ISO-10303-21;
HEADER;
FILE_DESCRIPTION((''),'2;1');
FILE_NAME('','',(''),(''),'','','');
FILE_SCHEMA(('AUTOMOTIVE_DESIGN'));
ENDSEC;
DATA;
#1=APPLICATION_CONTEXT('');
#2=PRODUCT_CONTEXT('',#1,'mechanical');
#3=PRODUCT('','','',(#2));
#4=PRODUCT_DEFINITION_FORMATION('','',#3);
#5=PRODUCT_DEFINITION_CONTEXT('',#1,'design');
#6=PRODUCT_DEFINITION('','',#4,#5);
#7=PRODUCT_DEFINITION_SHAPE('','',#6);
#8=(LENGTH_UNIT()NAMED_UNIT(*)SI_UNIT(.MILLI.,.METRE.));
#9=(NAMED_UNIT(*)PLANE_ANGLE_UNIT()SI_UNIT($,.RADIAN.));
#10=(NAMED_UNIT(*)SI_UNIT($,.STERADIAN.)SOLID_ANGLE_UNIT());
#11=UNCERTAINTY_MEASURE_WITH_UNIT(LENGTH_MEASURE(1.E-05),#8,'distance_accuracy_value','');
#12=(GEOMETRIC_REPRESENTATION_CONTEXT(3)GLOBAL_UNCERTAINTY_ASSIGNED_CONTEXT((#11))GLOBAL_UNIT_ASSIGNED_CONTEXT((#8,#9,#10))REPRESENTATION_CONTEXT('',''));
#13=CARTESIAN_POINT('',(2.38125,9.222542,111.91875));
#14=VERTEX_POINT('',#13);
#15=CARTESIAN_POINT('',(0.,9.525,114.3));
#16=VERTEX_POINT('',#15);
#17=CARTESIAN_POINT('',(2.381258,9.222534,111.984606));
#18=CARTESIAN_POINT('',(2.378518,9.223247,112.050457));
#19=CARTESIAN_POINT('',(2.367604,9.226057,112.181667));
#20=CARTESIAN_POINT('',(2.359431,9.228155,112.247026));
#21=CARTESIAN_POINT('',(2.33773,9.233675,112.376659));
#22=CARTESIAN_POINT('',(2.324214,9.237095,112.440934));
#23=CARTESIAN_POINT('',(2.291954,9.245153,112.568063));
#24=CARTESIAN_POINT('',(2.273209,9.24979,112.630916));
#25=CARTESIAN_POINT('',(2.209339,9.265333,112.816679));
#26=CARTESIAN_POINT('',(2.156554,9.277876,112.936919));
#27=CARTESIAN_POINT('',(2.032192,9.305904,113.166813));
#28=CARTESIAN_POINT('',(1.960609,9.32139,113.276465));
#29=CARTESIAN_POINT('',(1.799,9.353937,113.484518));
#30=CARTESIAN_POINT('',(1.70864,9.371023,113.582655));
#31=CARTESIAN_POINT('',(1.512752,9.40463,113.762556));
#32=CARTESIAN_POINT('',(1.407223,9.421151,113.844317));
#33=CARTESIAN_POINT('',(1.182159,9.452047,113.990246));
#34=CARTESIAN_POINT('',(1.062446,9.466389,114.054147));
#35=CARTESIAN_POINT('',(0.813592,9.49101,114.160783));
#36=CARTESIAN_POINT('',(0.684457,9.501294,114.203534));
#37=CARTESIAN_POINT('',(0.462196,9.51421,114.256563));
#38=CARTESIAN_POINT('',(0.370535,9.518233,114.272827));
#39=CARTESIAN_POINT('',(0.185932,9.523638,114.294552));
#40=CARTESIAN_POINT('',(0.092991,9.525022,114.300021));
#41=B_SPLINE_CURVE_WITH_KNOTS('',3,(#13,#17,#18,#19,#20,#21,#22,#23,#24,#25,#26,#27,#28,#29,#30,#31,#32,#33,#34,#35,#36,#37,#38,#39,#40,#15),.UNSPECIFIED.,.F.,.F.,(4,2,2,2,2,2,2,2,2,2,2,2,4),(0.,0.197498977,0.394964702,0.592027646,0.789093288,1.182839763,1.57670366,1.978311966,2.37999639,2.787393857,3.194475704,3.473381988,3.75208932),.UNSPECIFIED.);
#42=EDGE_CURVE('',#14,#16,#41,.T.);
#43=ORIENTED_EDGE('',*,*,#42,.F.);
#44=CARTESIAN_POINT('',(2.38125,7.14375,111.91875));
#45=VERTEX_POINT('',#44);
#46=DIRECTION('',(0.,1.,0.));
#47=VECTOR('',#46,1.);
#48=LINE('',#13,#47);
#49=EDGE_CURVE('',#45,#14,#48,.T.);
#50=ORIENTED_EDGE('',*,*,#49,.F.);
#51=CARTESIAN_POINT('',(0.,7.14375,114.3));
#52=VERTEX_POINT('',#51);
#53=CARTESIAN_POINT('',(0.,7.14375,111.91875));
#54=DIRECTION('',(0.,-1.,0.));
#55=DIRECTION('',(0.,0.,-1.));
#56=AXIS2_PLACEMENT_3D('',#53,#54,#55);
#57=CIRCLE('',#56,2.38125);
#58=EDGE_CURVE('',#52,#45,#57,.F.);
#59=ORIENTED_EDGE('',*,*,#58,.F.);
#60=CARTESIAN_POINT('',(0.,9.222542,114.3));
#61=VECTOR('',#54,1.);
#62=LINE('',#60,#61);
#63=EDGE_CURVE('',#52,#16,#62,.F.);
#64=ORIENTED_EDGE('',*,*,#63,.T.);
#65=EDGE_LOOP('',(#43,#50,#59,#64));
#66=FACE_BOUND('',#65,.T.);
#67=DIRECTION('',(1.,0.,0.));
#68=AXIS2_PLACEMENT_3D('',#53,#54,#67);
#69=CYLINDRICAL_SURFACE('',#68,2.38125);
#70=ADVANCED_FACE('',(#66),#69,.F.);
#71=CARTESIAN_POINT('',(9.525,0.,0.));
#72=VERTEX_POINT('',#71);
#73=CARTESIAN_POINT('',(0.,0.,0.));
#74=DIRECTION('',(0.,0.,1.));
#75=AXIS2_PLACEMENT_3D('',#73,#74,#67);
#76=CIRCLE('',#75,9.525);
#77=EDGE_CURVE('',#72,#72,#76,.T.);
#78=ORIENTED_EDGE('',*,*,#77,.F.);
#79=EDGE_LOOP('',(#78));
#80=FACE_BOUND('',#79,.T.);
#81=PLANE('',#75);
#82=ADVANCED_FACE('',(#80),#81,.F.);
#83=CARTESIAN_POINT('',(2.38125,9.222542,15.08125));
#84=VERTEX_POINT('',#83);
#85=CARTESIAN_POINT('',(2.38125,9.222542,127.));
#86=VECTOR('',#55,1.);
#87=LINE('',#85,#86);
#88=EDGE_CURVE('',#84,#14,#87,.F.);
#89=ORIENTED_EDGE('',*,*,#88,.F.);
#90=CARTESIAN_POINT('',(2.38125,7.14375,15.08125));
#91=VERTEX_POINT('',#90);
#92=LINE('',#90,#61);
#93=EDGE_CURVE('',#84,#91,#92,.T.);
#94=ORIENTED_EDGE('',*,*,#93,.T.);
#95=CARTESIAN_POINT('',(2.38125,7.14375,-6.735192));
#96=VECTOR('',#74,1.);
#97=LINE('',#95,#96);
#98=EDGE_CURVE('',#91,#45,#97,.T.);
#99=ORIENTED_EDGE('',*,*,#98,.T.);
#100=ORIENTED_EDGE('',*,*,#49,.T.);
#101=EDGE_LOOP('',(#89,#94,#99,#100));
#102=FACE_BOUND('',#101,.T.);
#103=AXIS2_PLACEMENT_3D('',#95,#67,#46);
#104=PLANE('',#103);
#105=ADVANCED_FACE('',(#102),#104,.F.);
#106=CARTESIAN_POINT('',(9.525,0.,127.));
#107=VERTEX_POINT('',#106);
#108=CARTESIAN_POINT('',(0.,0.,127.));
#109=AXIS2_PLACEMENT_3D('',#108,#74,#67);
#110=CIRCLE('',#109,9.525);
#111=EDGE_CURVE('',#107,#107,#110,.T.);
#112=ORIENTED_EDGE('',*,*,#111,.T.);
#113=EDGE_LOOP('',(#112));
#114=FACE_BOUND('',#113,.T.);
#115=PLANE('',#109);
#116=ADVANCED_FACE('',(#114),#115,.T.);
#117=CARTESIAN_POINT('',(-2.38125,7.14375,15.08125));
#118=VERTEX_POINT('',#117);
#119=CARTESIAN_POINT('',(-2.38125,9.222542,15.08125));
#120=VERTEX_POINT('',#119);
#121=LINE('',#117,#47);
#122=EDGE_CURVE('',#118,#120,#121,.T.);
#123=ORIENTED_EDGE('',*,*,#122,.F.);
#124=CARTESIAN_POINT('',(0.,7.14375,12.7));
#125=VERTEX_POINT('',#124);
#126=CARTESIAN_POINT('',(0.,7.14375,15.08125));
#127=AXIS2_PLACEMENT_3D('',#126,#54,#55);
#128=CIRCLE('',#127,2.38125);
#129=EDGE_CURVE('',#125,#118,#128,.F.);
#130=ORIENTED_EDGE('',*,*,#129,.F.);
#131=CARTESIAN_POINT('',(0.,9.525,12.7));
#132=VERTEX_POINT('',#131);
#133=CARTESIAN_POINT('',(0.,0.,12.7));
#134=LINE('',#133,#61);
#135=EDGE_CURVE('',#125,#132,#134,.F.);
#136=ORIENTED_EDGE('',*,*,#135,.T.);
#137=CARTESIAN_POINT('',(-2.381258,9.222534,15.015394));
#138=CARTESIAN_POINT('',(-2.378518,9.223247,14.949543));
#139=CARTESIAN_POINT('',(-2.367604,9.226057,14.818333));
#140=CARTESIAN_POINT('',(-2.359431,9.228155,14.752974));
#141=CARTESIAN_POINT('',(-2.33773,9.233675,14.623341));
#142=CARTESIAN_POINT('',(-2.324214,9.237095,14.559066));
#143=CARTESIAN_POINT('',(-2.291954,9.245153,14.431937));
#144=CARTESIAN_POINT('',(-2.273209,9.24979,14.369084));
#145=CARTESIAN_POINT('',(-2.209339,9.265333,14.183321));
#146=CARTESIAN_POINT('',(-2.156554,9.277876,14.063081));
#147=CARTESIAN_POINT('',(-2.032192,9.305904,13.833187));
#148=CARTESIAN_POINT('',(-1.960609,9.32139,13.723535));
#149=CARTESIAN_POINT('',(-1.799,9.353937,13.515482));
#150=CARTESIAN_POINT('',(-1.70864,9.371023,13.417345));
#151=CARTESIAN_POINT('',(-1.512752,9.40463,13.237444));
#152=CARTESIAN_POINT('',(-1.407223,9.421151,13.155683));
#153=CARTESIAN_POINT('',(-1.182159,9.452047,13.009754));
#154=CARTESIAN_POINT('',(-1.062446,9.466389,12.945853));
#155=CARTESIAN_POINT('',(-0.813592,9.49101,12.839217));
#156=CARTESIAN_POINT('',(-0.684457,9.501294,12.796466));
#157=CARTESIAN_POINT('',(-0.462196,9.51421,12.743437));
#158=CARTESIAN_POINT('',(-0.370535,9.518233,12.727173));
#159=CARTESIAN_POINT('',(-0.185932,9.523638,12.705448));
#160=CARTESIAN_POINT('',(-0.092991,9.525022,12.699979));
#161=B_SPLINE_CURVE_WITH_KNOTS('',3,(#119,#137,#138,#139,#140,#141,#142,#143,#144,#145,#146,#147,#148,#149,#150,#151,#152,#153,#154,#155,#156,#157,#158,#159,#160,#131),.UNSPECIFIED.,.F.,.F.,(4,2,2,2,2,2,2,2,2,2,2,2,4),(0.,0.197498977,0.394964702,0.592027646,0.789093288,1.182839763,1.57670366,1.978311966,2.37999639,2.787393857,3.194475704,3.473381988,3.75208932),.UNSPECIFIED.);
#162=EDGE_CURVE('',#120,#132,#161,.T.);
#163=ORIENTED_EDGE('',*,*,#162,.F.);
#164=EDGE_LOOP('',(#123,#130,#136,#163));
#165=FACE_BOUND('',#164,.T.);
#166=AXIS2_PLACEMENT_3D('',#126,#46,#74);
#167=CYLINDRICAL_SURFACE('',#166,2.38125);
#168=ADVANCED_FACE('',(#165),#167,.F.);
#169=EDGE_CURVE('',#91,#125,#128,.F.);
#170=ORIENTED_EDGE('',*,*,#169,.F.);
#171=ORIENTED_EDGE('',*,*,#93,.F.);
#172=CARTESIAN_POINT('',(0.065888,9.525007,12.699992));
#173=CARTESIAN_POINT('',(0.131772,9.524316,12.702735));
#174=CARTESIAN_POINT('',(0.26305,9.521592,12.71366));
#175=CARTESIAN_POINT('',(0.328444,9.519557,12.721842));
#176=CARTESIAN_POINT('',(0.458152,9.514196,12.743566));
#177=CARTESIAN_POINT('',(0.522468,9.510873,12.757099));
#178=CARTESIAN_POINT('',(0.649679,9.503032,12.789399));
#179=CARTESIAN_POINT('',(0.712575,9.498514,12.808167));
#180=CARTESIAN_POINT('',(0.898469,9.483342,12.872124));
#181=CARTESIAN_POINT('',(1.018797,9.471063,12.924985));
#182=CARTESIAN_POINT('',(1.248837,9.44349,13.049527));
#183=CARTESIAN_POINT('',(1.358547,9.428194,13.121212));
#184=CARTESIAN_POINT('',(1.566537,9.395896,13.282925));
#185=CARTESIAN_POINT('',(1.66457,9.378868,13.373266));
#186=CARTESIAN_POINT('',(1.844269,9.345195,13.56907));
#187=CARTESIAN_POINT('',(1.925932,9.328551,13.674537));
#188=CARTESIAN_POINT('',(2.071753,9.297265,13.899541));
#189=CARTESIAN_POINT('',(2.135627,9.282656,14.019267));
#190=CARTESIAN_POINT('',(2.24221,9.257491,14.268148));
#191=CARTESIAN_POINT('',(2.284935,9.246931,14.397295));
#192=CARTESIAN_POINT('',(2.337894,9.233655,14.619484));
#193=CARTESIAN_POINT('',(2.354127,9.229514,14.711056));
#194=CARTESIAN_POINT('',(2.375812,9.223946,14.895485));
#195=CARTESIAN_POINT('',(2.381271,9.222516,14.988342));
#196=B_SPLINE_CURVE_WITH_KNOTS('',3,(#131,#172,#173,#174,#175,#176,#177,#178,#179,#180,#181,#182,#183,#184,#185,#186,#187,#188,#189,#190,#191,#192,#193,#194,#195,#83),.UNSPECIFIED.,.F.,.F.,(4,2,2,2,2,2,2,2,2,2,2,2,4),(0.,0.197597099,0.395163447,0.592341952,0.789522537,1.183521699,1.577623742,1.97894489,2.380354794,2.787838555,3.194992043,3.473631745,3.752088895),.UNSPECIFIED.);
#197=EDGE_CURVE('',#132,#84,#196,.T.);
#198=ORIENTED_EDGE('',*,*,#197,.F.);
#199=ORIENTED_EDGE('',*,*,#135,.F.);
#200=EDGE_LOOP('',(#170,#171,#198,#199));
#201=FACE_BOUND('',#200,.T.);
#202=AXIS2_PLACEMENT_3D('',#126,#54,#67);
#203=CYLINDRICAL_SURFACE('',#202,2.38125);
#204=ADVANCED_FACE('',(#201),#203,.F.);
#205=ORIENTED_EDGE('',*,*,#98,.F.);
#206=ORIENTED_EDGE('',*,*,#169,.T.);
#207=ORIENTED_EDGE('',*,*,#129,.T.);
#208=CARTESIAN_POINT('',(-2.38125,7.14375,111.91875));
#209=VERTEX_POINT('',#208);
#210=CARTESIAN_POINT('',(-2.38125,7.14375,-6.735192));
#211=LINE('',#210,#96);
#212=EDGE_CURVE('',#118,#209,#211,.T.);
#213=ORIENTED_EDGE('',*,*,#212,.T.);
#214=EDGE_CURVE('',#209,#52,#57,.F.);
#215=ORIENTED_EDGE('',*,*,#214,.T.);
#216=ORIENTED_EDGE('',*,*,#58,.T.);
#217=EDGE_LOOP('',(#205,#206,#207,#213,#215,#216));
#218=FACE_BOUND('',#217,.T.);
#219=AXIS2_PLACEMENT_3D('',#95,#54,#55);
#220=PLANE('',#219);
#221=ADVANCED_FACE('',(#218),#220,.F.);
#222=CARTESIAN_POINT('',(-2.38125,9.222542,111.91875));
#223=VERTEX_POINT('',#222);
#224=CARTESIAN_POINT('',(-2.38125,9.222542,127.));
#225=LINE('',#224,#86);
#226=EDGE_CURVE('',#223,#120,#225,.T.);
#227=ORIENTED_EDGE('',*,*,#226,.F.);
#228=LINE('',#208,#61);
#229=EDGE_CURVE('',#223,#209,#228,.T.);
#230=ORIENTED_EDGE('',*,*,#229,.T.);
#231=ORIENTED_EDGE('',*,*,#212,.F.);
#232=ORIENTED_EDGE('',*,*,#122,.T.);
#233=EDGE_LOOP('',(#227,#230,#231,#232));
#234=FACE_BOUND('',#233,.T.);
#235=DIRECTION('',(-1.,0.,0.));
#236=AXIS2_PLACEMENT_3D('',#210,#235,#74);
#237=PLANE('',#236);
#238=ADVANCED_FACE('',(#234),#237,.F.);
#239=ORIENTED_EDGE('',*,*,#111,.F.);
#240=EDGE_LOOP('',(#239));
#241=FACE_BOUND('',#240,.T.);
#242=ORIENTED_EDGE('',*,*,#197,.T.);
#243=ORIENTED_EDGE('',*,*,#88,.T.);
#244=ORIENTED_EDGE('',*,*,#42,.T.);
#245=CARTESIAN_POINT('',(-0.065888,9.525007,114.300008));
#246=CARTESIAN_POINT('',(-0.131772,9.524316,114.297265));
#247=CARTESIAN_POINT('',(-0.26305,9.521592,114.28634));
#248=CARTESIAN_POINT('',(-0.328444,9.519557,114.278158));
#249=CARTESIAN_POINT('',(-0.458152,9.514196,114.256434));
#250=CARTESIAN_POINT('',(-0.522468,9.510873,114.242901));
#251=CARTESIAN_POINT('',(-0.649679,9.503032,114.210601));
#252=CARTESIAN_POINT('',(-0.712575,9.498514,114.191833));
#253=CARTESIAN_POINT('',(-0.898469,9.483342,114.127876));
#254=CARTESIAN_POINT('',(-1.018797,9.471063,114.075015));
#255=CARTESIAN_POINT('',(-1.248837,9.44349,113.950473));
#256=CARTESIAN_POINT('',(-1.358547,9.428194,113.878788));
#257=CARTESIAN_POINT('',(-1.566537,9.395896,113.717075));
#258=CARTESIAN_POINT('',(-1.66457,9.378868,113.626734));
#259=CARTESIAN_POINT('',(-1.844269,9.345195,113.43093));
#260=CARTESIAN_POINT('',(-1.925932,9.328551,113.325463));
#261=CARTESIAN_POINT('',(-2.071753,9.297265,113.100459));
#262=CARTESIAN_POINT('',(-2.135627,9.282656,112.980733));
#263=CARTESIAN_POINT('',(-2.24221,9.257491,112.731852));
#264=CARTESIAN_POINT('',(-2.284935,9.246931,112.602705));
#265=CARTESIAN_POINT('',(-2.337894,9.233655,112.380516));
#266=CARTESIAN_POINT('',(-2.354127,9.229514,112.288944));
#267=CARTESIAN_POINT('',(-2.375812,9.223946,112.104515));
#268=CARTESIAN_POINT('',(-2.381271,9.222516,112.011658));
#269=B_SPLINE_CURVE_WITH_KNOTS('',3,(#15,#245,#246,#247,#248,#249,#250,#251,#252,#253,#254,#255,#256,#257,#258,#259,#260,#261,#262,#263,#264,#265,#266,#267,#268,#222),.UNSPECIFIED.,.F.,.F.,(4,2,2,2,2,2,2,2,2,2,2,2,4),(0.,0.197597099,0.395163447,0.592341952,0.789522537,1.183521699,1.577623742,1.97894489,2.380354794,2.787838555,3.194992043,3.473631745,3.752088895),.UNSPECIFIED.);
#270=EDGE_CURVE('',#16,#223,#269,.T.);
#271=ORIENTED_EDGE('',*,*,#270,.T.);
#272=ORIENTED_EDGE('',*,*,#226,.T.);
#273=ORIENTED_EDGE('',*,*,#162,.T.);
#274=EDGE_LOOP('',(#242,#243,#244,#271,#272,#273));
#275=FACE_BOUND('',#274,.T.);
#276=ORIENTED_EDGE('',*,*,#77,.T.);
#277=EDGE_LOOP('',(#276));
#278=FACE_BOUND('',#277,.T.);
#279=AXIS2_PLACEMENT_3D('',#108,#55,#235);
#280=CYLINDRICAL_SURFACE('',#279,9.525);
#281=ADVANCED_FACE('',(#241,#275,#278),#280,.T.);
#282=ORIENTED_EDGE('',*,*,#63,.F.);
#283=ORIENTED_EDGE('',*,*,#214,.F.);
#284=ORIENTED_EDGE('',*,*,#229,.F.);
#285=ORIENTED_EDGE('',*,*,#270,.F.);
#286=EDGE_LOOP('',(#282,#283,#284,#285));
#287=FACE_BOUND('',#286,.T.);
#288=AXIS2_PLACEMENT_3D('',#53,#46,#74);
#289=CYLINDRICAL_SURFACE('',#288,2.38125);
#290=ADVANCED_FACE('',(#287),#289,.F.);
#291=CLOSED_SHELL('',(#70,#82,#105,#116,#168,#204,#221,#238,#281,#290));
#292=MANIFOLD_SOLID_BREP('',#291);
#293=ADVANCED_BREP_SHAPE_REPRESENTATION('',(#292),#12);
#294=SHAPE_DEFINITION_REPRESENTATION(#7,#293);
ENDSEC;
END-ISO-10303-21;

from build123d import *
from build123d.topology import SkipClean

# Parameters (mm, degrees)
SKETCH1_R          = 9.525
EXTRUDE1_DEPTH     = 127
SKETCH2_W          = 4.7625
SKETCH2_H          = 4.7625
CUT_EXTRUDE1_DEPTH = 114.3
EXTRUDE2_START     = -12.7
EXTRUDE2_DEPTH     = 12.7
FILLET1_R          = 2.38125


with BuildPart() as part:
    # Sketch1 → Extrude1 (new body)
    with BuildSketch(Plane.XY):
        Circle(SKETCH1_R)
    extrude(amount=EXTRUDE1_DEPTH)

    # Sketch2 → Cut-Extrude1 (cut)
    with BuildSketch(Plane.XY.offset(127)):
        with Locations((0, 9.525)):
            Rectangle(SKETCH2_W, SKETCH2_H)
    extrude(amount=-CUT_EXTRUDE1_DEPTH, mode=Mode.SUBTRACT)

    # Sketch4 → Extrude2 (add)
    with SkipClean():  # the faces are left unmerged after this step: merging them gives an invalid solid
        with BuildSketch(Plane.XY.offset(127).offset(EXTRUDE2_START)):
            with BuildLine():
                Line((2.38125, 7.14375), (-2.38125, 7.14375))
                Line((-2.38125, 7.14375), (-2.38125, 9.222541593))
                ThreePointArc((-2.38125, 9.222541593), (0, 9.525), (2.38125, 9.222541593))
                Line((2.38125, 9.222541593), (2.38125, 7.14375))
            make_face()
        extrude(amount=EXTRUDE2_DEPTH)

    # Fillet1
    # the kernel refuses this fillet: 2.38125 mm, written as the material it adds along each edge
    with BuildSketch(Plane(origin=(2.38125, 15.175666593, 114.3), x_dir=(0, 0, -1), z_dir=(0, -1, 0))) as fillet1_piece_1_section:
        with BuildLine():
            CenterArc((FILLET1_R, -FILLET1_R), FILLET1_R, 90, 90)
            Line((0, -FILLET1_R), (0, 0))
            Line((0, 0), (FILLET1_R, 0))
        make_face()
    fillet1_piece_1 = extrude(amount=13.985041593, mode=Mode.PRIVATE)
    fillet1_piece_1 = fillet1_piece_1 & Plane(origin=(0, 0, 113.773698621), x_dir=(1, 0, 0), z_dir=(0, 0, -1)) * Cylinder(9.525, 38, mode=Mode.PRIVATE)
    add(fillet1_piece_1)
    with BuildSketch(Plane(origin=(-2.38125, 1.190625, 114.3), x_dir=(0, 0, -1), z_dir=(0, 1, 0))) as fillet1_piece_2_section:
        with BuildLine():
            CenterArc((FILLET1_R, -FILLET1_R), FILLET1_R, 90, 90)
            Line((0, -FILLET1_R), (0, 0))
            Line((0, 0), (FILLET1_R, 0))
        make_face()
    fillet1_piece_2 = extrude(amount=13.985041593, mode=Mode.PRIVATE)
    fillet1_piece_2 = fillet1_piece_2 & Plane(origin=(0, 0, 113.760896634), x_dir=(1, 0, 0), z_dir=(0, 0, -1)) * Cylinder(9.525, 38, mode=Mode.PRIVATE)
    add(fillet1_piece_2)
    with BuildSketch(Plane(origin=(-2.38125, 1.190625, 12.7), x_dir=(0, 0, 1), z_dir=(0, 1, 0))) as fillet1_piece_3_section:
        with BuildLine():
            CenterArc((FILLET1_R, FILLET1_R), FILLET1_R, 180, 90)
            Line((0, FILLET1_R), (0, 0))
            Line((0, 0), (FILLET1_R, 0))
        make_face()
    fillet1_piece_3 = extrude(amount=13.985041593, mode=Mode.PRIVATE)
    fillet1_piece_3 = fillet1_piece_3 & Plane(origin=(0, 0, 13.239103366), x_dir=(1, 0, 0), z_dir=(0, 0, -1)) * Cylinder(9.525, 38, mode=Mode.PRIVATE)
    add(fillet1_piece_3)
    with BuildSketch(Plane(origin=(2.38125, 15.175666593, 12.7), x_dir=(-1, 0, 0), z_dir=(0, -1, 0))) as fillet1_piece_4_section:
        with BuildLine():
            CenterArc((FILLET1_R, -FILLET1_R), FILLET1_R, 90, 90)
            Line((0, -FILLET1_R), (0, 0))
            Line((0, 0), (FILLET1_R, 0))
        make_face()
    fillet1_piece_4 = extrude(amount=13.985041593, mode=Mode.PRIVATE)
    fillet1_piece_4 = fillet1_piece_4 & Plane(origin=(0, 0, 13.226300129), x_dir=(1, 0, 0), z_dir=(0, 0, -1)) * Cylinder(9.525, 38, mode=Mode.PRIVATE)
    add(fillet1_piece_4)


solid = part.part
